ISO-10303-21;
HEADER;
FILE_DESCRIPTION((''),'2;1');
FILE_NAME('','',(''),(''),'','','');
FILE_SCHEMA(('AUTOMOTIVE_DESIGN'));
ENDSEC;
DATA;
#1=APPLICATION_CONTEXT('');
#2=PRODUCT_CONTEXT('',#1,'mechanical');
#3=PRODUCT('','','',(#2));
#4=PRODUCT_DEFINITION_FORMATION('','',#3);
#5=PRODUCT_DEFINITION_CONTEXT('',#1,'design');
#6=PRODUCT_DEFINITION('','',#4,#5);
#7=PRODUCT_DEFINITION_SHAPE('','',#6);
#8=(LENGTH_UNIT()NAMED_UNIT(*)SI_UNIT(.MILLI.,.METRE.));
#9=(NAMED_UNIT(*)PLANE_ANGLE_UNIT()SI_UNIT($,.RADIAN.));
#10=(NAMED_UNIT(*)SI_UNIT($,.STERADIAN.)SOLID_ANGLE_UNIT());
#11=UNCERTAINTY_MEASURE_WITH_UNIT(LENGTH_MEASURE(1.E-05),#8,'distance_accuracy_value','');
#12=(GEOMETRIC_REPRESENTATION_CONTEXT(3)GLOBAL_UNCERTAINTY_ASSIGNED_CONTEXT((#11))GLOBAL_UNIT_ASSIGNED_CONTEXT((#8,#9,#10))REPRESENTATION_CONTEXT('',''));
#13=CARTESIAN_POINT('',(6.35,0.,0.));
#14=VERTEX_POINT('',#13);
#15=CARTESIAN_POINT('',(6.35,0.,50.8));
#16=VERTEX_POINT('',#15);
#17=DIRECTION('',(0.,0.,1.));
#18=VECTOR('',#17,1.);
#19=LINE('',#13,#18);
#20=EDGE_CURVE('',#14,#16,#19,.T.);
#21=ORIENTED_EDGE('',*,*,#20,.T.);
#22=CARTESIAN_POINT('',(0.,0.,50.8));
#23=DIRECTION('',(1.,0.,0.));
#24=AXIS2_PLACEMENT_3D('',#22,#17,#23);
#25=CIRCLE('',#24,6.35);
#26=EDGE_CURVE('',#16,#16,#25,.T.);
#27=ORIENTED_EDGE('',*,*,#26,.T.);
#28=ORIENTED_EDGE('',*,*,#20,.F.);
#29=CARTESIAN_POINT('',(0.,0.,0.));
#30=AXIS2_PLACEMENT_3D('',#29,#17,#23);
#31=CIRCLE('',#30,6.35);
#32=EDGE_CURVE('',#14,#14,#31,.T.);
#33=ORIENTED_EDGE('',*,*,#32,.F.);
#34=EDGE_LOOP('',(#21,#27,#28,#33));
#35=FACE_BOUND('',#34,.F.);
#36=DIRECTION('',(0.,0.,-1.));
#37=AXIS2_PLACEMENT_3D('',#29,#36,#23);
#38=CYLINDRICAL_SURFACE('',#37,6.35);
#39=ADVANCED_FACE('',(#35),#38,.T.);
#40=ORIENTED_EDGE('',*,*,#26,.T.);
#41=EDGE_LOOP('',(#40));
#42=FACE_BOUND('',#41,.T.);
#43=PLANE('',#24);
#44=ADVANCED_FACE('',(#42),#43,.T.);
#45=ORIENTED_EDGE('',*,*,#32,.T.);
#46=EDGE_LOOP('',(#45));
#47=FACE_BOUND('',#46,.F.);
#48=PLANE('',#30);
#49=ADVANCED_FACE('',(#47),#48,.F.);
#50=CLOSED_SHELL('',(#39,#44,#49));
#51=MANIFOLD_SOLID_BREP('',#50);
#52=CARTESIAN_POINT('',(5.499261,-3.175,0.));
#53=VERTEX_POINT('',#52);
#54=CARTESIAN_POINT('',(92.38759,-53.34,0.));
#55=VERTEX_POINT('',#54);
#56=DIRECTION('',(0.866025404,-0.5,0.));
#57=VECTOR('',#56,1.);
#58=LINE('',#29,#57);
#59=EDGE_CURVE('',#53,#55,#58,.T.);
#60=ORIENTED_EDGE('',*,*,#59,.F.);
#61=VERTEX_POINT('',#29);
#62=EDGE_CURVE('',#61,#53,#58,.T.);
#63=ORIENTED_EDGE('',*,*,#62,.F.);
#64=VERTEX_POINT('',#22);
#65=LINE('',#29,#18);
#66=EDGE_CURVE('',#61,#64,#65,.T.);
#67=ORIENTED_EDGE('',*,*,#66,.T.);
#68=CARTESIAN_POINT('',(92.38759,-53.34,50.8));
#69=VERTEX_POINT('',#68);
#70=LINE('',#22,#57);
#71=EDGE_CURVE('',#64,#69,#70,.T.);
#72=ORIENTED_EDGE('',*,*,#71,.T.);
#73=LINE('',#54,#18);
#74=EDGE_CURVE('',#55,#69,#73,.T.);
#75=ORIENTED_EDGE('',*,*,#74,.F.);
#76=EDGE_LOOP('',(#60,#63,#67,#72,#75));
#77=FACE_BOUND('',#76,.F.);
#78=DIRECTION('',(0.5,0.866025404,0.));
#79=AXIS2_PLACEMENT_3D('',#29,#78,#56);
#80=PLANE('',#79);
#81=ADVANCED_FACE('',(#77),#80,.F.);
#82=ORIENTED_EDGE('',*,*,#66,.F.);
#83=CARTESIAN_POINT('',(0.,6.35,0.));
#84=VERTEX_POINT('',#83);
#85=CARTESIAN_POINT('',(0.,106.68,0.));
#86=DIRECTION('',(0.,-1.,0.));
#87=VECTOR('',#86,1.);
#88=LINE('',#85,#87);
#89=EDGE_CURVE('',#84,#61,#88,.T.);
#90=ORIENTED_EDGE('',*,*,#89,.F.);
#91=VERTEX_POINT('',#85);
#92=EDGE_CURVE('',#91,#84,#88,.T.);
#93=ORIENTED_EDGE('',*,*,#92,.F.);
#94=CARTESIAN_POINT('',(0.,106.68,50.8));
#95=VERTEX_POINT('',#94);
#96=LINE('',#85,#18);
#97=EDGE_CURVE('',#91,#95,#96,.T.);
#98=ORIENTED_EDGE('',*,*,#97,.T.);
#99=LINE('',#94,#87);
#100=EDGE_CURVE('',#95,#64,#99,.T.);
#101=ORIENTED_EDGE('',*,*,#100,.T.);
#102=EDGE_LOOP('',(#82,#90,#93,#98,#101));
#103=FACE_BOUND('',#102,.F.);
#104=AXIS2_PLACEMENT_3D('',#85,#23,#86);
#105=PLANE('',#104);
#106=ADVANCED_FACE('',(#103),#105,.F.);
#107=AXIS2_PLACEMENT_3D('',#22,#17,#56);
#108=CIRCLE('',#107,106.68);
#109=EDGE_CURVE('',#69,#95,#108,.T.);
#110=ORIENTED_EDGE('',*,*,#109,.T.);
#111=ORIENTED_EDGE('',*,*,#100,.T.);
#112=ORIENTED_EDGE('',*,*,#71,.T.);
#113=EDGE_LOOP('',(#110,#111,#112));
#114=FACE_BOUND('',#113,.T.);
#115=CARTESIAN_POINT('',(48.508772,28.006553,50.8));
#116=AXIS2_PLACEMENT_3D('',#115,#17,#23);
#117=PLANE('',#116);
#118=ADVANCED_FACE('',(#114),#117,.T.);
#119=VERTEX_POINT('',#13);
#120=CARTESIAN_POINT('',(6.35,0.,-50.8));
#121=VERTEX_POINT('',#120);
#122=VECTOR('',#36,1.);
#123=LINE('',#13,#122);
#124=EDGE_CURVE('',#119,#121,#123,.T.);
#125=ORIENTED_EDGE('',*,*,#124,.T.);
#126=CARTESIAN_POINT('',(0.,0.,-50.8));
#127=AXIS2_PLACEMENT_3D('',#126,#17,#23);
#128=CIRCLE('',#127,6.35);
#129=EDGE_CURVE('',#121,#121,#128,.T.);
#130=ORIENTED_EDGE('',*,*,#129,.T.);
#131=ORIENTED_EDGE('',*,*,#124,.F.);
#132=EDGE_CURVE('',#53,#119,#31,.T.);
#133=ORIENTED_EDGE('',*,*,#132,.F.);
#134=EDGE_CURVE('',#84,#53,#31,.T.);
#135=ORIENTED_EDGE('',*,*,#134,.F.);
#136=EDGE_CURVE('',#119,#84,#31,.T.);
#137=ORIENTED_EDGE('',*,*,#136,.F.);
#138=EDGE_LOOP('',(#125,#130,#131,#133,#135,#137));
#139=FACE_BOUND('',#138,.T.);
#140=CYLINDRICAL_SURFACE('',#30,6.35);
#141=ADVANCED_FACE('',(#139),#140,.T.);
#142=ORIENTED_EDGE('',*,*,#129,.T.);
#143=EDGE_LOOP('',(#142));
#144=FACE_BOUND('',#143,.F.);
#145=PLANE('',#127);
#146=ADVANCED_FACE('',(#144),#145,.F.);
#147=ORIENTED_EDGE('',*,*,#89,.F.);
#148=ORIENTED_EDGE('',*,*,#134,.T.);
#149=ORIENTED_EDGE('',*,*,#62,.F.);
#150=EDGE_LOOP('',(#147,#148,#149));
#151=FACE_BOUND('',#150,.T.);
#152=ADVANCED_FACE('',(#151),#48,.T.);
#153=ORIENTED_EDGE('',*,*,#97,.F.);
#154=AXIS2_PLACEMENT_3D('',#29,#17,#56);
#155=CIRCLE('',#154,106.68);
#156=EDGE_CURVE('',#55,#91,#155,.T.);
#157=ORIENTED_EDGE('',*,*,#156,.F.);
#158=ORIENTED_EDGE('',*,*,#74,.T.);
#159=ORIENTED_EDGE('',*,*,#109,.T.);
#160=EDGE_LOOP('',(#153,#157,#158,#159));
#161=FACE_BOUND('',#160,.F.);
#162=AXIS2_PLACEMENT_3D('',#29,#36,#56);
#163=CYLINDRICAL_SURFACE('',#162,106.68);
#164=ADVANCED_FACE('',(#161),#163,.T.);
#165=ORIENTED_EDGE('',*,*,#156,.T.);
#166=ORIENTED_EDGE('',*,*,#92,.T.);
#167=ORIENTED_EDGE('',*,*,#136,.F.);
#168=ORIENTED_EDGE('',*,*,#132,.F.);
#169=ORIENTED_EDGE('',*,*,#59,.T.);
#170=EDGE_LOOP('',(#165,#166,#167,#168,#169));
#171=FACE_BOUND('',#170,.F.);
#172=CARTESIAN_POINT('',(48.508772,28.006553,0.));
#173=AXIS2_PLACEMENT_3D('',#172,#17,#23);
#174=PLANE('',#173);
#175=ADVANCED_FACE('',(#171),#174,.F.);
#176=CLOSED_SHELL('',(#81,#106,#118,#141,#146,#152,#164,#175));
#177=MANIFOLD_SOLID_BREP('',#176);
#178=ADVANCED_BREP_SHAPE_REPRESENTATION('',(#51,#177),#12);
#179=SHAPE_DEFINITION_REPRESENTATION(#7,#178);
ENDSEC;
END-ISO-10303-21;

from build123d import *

# Parameters (mm, degrees)
F1_DEPTH = 50.8
F2_R     = 6.35
F3_DEPTH = 50.8
F4_DEPTH = 50.8


with BuildPart() as f1:
    # F0 (on Top) → F1 (new body)
    with BuildSketch(Plane.XY):
        with BuildLine():
            Line((0, 106.68), (0, 0))
            Line((0, 0), (92.3875900757, -53.34))
            ThreePointArc((92.3875900757, -53.34), (92.3875900757, 53.34), (0, 106.68))
        make_face()
    extrude(amount=F1_DEPTH)

    # F2 (on Top) → F4 (join)
    with BuildSketch(Plane.XY):
        Circle(F2_R)
    extrude(amount=-F4_DEPTH)


with BuildPart() as f3:
    # F2 (on Top) → F3 (new body)
    with BuildSketch(Plane.XY):
        Circle(F2_R)
    extrude(amount=F3_DEPTH)


solid = Compound([f1.part, f3.part])
